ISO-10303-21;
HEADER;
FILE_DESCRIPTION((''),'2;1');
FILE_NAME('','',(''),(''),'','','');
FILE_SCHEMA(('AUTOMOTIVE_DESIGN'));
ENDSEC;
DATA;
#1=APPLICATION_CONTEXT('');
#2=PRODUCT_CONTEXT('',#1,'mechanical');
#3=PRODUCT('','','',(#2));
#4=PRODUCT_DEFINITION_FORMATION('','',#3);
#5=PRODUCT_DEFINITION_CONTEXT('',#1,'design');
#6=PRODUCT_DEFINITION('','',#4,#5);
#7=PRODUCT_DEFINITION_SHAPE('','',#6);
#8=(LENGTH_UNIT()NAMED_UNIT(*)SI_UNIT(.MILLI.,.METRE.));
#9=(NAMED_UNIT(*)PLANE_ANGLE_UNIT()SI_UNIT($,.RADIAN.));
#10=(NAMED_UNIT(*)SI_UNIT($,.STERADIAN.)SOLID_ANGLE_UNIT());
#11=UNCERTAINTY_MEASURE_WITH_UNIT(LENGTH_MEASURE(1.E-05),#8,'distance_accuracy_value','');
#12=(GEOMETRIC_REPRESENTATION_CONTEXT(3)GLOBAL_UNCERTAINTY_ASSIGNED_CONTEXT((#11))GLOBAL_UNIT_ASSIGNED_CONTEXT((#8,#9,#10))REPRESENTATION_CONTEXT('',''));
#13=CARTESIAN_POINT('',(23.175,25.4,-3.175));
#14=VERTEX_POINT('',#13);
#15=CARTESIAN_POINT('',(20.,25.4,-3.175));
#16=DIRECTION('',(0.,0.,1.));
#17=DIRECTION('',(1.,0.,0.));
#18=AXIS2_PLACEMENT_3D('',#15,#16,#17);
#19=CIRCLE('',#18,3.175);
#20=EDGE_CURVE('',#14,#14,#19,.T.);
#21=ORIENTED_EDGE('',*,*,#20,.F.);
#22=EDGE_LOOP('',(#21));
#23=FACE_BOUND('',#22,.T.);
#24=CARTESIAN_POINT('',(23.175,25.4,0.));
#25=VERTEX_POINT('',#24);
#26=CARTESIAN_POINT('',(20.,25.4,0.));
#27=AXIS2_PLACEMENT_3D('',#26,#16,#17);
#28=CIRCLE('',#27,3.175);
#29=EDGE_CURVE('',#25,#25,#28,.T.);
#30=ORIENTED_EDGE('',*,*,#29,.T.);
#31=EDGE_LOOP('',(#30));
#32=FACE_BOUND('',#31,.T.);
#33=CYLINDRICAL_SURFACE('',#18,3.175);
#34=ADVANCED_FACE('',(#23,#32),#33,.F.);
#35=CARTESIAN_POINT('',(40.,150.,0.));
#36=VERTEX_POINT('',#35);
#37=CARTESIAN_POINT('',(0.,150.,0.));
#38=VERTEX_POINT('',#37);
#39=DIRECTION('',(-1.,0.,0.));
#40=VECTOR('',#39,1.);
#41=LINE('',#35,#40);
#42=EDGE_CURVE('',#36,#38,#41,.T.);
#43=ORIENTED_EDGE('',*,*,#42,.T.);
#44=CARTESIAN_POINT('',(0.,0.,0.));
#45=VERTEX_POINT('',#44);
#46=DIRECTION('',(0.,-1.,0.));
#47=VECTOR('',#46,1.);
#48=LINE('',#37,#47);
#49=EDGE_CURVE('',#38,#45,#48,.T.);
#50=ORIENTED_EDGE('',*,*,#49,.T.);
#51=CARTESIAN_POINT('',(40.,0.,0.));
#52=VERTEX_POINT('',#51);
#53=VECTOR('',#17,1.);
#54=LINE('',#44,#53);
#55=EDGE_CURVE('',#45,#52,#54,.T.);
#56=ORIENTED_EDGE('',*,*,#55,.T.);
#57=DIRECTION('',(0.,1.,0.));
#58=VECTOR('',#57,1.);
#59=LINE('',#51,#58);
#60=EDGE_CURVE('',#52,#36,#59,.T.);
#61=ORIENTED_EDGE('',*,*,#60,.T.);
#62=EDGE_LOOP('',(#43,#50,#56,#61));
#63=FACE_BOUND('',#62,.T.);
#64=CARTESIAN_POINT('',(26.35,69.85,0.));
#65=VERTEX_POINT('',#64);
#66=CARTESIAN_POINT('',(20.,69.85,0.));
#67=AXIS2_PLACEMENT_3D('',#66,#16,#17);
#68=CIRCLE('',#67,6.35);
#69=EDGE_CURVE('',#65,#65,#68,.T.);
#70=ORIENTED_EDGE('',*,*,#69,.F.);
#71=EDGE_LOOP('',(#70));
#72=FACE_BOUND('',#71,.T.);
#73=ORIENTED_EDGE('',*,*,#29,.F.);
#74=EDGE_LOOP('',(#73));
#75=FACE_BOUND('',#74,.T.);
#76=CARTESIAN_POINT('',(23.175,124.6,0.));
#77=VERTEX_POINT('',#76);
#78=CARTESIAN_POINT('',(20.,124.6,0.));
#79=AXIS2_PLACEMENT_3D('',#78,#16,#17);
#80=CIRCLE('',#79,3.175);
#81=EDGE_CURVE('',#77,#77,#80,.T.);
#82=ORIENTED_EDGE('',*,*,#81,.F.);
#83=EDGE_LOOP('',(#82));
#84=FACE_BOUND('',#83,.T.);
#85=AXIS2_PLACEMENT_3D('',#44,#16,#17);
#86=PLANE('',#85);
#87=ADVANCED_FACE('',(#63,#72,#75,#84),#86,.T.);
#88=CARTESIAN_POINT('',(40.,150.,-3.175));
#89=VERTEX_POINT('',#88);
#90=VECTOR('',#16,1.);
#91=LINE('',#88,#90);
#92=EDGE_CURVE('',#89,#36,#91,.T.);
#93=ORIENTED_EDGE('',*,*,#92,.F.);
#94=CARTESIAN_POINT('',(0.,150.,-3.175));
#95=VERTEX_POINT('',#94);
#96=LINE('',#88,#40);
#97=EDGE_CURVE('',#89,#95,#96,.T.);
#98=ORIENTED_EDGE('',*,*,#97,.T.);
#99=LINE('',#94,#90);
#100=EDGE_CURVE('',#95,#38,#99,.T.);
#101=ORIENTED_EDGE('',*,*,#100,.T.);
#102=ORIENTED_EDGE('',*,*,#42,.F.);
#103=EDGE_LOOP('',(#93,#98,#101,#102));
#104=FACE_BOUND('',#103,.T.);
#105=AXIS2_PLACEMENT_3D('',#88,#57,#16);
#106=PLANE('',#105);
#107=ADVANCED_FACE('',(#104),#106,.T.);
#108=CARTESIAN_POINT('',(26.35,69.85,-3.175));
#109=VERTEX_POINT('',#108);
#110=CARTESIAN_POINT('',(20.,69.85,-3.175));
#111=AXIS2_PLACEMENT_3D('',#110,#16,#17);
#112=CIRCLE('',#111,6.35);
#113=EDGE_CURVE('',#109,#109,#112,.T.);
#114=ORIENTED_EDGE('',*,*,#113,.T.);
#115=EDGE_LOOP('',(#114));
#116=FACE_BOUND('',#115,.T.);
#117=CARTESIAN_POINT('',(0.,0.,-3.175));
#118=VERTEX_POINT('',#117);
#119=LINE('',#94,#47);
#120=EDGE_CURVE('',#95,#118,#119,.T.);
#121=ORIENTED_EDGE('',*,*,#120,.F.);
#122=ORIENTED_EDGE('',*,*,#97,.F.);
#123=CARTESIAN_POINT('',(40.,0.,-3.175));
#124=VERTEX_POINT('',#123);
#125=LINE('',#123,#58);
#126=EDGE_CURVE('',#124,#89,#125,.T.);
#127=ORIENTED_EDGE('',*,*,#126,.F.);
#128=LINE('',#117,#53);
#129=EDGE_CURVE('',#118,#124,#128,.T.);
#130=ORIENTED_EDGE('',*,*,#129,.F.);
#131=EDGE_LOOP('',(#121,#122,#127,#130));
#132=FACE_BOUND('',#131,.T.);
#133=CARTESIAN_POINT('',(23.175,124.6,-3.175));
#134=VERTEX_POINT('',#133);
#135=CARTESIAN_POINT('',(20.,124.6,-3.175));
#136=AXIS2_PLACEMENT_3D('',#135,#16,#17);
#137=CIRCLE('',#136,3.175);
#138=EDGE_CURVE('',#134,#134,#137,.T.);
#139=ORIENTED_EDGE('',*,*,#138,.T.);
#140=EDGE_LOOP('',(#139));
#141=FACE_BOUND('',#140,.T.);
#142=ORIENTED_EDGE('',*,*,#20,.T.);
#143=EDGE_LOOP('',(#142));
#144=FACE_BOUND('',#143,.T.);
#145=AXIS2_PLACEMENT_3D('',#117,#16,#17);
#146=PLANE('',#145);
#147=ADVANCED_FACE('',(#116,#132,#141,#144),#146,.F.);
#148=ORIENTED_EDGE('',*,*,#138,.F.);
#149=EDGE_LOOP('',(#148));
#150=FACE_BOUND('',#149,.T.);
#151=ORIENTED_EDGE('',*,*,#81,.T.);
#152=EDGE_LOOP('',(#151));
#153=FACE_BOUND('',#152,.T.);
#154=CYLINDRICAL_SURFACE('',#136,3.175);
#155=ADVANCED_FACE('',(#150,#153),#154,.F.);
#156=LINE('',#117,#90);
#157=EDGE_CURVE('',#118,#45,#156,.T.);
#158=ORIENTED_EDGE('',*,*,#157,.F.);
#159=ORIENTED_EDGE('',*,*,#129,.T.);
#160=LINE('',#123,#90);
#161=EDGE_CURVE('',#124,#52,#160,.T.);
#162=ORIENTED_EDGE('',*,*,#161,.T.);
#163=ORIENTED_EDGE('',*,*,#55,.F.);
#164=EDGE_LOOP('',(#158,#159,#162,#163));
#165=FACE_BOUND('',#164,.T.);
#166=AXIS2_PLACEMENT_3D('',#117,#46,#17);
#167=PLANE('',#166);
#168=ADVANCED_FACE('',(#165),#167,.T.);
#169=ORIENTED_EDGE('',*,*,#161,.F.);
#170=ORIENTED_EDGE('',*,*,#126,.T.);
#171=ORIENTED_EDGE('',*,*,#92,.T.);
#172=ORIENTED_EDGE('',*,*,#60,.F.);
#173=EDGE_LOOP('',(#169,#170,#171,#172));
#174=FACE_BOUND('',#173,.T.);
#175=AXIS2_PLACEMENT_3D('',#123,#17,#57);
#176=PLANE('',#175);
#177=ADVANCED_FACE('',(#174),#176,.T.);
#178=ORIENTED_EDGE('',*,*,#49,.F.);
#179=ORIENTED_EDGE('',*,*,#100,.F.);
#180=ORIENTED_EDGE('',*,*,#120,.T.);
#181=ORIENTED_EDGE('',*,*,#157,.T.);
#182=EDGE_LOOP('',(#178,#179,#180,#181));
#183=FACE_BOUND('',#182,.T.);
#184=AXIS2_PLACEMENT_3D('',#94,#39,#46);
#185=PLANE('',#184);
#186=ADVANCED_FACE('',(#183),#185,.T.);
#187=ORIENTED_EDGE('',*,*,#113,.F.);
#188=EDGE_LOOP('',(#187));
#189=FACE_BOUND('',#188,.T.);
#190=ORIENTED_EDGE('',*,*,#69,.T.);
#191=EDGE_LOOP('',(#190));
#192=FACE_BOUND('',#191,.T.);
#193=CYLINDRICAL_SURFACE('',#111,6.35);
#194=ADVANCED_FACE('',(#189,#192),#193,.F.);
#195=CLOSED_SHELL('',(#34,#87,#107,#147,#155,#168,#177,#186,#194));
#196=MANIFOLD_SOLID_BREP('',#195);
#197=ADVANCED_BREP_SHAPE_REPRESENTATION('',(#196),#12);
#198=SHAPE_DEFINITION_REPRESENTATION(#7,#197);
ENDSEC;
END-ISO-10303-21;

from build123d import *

# Parameters (mm, degrees)
SKETCH1_W          = 40
SKETCH1_H          = 150
SKETCH1_R          = 6.35
SKETCH1_R_2        = 3.175
BASE_FLANGE1_DEPTH = 3.175


# Sheet-metal steps are written as plain solids
with BuildPart() as part:
    # Sketch1 → Base-Flange1 (new body)
    with BuildSketch(Plane.XY):
        with Locations((20, 75)):
            Rectangle(SKETCH1_W, SKETCH1_H)
        with Locations((20, 69.85)):
            Circle(SKETCH1_R, mode=Mode.SUBTRACT)
        with Locations((20, 25.4)):
            Circle(SKETCH1_R_2, mode=Mode.SUBTRACT)
        with Locations((20, 124.6)):
            Circle(SKETCH1_R_2, mode=Mode.SUBTRACT)
    extrude(amount=-BASE_FLANGE1_DEPTH)


solid = part.part
